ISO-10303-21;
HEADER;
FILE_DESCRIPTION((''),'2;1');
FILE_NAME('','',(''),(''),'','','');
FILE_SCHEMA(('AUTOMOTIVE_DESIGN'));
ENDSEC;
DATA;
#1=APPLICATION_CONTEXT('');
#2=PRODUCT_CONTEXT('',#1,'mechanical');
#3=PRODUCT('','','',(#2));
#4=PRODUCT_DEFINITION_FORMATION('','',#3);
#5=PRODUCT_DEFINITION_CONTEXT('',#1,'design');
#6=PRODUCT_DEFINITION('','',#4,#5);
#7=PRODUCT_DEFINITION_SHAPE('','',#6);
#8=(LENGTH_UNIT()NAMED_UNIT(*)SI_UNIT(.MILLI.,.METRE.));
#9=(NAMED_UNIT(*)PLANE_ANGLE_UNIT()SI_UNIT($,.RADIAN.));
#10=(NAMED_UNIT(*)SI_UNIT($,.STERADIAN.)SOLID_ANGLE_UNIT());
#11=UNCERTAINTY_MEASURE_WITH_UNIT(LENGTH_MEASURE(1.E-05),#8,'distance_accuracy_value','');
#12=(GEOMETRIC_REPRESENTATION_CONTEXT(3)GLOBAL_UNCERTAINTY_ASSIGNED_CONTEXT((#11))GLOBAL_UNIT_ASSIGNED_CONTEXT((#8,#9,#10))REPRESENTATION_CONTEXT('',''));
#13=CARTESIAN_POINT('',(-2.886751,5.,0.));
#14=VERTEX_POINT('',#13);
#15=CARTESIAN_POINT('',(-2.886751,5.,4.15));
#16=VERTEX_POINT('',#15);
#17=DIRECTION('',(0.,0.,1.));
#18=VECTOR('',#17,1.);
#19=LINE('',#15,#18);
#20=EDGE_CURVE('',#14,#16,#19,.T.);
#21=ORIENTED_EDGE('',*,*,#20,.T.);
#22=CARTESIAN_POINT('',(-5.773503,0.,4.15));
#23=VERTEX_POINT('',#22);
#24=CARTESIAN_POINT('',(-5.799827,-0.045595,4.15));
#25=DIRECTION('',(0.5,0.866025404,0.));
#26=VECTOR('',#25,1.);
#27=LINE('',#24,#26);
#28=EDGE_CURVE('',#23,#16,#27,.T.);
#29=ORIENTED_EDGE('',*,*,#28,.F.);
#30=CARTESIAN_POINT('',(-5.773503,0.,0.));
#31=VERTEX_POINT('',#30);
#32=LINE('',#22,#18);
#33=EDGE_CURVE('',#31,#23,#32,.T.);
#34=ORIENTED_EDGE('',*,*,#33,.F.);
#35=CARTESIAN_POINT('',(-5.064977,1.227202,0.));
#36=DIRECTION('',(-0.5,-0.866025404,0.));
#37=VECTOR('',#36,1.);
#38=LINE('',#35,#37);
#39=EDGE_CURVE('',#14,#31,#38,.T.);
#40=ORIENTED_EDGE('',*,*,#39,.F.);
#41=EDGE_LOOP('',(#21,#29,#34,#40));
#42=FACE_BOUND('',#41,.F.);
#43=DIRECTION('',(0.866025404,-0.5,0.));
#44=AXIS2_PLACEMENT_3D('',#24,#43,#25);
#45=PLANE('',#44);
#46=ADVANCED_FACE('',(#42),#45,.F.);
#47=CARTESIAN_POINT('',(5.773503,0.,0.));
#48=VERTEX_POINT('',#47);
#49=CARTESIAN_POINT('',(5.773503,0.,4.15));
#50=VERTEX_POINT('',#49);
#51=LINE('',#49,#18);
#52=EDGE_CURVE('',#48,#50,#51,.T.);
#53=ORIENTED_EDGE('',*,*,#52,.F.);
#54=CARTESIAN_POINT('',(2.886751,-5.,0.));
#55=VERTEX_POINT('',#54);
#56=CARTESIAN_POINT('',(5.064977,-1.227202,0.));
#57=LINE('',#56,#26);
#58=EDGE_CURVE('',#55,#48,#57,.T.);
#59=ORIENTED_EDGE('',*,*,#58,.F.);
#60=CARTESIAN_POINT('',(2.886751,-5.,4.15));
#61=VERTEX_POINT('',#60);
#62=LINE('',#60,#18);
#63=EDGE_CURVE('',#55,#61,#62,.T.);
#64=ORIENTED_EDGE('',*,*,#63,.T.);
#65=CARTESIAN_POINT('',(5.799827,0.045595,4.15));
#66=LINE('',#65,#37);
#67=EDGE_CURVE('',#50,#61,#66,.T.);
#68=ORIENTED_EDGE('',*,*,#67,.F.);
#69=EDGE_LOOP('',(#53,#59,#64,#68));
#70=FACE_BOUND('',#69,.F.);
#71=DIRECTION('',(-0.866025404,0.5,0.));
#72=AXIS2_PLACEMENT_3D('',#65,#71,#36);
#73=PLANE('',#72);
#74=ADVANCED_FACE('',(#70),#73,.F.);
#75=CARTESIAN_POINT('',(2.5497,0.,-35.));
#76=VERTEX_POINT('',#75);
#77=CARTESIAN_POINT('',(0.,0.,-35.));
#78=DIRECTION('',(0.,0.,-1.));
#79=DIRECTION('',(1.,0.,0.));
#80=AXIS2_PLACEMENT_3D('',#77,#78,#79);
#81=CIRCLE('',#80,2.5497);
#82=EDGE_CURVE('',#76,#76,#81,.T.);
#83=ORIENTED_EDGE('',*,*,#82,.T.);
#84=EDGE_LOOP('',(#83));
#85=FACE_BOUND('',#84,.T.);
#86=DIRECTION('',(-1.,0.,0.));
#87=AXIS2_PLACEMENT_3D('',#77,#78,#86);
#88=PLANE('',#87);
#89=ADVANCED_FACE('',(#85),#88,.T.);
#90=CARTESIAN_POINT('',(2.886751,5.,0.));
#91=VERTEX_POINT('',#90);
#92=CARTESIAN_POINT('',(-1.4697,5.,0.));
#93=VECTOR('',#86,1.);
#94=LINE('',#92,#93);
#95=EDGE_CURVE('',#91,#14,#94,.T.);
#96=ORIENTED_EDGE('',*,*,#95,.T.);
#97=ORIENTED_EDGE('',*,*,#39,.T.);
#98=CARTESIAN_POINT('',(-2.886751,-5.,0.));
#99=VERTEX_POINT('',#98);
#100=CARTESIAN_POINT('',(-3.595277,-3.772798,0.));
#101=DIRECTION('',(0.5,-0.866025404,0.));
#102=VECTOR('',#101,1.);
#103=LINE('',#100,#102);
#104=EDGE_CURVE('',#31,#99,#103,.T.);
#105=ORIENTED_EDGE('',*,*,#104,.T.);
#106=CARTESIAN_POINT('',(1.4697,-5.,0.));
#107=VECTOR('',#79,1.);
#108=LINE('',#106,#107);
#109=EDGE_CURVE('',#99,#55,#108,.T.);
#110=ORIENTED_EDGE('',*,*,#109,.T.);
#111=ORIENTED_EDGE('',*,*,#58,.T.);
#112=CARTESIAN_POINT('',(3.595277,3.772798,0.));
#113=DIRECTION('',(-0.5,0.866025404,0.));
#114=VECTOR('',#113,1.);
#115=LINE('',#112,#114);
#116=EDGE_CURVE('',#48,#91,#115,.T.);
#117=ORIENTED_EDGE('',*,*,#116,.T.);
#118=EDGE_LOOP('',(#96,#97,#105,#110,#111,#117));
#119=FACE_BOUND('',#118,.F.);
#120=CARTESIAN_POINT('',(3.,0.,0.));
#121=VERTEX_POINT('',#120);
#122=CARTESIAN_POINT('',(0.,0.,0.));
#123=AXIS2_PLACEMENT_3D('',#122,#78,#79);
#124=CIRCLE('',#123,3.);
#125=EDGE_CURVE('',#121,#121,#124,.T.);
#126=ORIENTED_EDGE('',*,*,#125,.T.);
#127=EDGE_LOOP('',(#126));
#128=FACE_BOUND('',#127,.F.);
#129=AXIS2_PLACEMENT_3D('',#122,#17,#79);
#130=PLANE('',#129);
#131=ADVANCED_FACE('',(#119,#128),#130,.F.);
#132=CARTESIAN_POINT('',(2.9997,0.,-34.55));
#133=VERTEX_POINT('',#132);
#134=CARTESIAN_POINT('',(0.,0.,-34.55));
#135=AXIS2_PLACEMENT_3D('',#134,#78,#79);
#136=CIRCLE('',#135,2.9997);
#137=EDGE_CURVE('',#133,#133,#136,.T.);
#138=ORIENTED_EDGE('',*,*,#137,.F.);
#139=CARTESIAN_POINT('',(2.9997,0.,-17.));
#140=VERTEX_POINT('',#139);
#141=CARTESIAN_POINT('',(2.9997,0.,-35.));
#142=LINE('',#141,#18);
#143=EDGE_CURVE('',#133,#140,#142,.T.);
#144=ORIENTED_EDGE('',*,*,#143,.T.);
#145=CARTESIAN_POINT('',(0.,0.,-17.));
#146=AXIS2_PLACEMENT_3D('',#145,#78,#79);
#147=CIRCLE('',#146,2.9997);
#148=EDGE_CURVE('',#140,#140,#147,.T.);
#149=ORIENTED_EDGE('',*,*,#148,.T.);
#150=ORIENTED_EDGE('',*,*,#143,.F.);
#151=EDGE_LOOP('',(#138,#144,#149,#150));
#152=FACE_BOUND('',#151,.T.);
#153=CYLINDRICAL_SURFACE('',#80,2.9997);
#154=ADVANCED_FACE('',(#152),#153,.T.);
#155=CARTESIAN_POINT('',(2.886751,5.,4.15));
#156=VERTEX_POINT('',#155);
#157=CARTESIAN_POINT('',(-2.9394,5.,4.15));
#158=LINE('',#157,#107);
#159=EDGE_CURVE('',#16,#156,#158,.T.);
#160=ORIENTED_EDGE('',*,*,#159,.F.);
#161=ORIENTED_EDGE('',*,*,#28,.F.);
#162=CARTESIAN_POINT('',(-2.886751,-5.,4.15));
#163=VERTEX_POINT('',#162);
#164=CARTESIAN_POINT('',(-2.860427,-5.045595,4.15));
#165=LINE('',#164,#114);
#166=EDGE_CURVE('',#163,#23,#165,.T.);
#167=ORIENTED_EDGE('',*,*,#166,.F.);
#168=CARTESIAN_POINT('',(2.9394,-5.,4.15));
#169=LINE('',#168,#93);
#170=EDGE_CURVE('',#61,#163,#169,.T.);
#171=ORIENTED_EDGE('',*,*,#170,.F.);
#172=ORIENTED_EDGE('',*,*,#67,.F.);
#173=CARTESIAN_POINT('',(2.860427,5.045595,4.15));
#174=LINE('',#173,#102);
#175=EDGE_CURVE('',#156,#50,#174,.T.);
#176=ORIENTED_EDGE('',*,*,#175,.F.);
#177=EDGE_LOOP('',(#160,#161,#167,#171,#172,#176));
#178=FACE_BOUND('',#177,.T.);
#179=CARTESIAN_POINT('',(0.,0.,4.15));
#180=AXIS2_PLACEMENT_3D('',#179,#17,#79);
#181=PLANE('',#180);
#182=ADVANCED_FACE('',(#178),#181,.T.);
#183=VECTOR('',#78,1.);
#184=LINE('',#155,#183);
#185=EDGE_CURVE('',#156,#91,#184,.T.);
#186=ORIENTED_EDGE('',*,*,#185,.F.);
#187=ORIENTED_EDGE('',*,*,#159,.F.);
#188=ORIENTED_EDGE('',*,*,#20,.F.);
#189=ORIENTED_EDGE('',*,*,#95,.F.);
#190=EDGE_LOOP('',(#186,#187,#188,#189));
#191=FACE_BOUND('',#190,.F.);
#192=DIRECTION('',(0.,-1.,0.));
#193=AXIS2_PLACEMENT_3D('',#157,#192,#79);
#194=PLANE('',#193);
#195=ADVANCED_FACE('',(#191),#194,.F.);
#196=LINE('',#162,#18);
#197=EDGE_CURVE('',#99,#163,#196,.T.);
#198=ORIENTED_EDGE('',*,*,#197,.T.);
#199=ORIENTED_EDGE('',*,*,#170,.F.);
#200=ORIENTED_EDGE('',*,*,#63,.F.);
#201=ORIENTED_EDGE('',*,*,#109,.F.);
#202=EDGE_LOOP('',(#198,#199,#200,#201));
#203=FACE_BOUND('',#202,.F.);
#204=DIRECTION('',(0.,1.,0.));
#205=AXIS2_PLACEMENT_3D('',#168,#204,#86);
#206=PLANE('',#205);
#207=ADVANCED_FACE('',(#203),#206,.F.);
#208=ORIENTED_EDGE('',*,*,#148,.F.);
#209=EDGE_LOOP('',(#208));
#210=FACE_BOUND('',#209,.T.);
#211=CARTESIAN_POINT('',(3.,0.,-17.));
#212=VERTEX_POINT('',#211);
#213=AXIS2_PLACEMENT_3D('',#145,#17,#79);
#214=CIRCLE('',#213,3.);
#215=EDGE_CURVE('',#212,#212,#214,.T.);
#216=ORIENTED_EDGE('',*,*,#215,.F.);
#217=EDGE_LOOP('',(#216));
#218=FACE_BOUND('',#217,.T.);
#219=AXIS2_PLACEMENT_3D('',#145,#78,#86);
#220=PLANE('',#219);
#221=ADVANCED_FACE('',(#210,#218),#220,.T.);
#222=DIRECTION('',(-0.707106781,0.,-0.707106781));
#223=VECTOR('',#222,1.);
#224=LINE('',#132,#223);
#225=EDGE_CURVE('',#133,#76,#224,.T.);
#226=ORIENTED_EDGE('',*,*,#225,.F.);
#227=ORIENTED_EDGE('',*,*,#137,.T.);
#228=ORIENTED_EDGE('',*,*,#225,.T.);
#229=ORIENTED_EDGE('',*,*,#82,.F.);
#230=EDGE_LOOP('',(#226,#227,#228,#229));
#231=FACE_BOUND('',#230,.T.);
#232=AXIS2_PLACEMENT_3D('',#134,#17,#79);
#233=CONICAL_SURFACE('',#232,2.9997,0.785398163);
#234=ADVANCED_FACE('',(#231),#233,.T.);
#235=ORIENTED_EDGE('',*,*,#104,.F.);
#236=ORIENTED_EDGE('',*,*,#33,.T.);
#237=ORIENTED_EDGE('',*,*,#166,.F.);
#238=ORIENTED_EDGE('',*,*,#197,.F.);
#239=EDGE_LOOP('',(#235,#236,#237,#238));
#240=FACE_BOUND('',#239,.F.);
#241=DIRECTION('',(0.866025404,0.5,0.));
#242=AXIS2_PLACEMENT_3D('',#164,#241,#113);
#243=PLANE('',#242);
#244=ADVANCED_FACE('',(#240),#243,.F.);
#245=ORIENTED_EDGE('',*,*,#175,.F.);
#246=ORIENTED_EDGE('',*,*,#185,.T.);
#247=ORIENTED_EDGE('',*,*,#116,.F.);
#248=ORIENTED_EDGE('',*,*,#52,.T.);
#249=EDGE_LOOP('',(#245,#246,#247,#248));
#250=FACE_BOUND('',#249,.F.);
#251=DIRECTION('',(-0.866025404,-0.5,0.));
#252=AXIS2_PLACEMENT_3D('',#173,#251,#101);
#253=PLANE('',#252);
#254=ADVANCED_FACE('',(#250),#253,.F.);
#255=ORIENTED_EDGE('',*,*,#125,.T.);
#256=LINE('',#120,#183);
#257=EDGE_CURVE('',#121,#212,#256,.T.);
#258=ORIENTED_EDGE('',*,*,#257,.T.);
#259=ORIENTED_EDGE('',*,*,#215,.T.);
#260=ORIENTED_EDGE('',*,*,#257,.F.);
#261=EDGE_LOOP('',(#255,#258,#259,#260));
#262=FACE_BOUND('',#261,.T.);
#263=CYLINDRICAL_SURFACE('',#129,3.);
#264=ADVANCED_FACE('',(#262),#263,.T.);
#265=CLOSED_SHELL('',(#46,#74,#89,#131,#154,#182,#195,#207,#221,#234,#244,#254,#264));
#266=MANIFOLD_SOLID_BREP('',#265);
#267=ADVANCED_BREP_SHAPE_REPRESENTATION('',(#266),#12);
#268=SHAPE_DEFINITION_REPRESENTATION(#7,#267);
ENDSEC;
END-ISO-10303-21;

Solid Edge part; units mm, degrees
sketch "Sketch1" plane through (0, 0, 0) normal (0, 0, 1) x (1, 0, 0)
  circle A0 centre (0, 0) radius 5.8
  dimension "D1" = 11.6
extrude "Protrusion1" add sketch "Sketch1" along normal blind 4.15
sketch "Sketch2" plane through (0, 0, 0) normal (0, 0, -1) x (1, 0, 0)
  circle A0 centre (0, 0) radius 3
extrude "Protrusion2" add sketch "Sketch2" along normal blind 35
sketch "Sketch3" plane through (0, 0, -35) normal (0, 0, -1) x (1, 0, 0)
  circle A0 centre (0, 0) radius 2.9997
extrude "Cutout1" cut sketch "Sketch3" against normal blind 18 flip side to cut
chamfer "Chamfer_1" distance 0.45 angle 45 1 edges at (-2.9997, 0, -35)
sketch "Sketch4" plane through (0, 0, 4.15) normal (0, 0, 1) x (1, 0, 0)
  line L0 (-2.9394, 5) -> (2.9394, 5)
  dimension "D1" = 10
extrude "Cutout2" cut sketch "Sketch4" against normal up to next material side at (0, 5.05, 4.15)
pattern_circular "Pattern1" count 6 over 360 about axis through (0, 0, 4.15) along (0, 0, 1) of "Cutout2"
properties part number "24101197"
